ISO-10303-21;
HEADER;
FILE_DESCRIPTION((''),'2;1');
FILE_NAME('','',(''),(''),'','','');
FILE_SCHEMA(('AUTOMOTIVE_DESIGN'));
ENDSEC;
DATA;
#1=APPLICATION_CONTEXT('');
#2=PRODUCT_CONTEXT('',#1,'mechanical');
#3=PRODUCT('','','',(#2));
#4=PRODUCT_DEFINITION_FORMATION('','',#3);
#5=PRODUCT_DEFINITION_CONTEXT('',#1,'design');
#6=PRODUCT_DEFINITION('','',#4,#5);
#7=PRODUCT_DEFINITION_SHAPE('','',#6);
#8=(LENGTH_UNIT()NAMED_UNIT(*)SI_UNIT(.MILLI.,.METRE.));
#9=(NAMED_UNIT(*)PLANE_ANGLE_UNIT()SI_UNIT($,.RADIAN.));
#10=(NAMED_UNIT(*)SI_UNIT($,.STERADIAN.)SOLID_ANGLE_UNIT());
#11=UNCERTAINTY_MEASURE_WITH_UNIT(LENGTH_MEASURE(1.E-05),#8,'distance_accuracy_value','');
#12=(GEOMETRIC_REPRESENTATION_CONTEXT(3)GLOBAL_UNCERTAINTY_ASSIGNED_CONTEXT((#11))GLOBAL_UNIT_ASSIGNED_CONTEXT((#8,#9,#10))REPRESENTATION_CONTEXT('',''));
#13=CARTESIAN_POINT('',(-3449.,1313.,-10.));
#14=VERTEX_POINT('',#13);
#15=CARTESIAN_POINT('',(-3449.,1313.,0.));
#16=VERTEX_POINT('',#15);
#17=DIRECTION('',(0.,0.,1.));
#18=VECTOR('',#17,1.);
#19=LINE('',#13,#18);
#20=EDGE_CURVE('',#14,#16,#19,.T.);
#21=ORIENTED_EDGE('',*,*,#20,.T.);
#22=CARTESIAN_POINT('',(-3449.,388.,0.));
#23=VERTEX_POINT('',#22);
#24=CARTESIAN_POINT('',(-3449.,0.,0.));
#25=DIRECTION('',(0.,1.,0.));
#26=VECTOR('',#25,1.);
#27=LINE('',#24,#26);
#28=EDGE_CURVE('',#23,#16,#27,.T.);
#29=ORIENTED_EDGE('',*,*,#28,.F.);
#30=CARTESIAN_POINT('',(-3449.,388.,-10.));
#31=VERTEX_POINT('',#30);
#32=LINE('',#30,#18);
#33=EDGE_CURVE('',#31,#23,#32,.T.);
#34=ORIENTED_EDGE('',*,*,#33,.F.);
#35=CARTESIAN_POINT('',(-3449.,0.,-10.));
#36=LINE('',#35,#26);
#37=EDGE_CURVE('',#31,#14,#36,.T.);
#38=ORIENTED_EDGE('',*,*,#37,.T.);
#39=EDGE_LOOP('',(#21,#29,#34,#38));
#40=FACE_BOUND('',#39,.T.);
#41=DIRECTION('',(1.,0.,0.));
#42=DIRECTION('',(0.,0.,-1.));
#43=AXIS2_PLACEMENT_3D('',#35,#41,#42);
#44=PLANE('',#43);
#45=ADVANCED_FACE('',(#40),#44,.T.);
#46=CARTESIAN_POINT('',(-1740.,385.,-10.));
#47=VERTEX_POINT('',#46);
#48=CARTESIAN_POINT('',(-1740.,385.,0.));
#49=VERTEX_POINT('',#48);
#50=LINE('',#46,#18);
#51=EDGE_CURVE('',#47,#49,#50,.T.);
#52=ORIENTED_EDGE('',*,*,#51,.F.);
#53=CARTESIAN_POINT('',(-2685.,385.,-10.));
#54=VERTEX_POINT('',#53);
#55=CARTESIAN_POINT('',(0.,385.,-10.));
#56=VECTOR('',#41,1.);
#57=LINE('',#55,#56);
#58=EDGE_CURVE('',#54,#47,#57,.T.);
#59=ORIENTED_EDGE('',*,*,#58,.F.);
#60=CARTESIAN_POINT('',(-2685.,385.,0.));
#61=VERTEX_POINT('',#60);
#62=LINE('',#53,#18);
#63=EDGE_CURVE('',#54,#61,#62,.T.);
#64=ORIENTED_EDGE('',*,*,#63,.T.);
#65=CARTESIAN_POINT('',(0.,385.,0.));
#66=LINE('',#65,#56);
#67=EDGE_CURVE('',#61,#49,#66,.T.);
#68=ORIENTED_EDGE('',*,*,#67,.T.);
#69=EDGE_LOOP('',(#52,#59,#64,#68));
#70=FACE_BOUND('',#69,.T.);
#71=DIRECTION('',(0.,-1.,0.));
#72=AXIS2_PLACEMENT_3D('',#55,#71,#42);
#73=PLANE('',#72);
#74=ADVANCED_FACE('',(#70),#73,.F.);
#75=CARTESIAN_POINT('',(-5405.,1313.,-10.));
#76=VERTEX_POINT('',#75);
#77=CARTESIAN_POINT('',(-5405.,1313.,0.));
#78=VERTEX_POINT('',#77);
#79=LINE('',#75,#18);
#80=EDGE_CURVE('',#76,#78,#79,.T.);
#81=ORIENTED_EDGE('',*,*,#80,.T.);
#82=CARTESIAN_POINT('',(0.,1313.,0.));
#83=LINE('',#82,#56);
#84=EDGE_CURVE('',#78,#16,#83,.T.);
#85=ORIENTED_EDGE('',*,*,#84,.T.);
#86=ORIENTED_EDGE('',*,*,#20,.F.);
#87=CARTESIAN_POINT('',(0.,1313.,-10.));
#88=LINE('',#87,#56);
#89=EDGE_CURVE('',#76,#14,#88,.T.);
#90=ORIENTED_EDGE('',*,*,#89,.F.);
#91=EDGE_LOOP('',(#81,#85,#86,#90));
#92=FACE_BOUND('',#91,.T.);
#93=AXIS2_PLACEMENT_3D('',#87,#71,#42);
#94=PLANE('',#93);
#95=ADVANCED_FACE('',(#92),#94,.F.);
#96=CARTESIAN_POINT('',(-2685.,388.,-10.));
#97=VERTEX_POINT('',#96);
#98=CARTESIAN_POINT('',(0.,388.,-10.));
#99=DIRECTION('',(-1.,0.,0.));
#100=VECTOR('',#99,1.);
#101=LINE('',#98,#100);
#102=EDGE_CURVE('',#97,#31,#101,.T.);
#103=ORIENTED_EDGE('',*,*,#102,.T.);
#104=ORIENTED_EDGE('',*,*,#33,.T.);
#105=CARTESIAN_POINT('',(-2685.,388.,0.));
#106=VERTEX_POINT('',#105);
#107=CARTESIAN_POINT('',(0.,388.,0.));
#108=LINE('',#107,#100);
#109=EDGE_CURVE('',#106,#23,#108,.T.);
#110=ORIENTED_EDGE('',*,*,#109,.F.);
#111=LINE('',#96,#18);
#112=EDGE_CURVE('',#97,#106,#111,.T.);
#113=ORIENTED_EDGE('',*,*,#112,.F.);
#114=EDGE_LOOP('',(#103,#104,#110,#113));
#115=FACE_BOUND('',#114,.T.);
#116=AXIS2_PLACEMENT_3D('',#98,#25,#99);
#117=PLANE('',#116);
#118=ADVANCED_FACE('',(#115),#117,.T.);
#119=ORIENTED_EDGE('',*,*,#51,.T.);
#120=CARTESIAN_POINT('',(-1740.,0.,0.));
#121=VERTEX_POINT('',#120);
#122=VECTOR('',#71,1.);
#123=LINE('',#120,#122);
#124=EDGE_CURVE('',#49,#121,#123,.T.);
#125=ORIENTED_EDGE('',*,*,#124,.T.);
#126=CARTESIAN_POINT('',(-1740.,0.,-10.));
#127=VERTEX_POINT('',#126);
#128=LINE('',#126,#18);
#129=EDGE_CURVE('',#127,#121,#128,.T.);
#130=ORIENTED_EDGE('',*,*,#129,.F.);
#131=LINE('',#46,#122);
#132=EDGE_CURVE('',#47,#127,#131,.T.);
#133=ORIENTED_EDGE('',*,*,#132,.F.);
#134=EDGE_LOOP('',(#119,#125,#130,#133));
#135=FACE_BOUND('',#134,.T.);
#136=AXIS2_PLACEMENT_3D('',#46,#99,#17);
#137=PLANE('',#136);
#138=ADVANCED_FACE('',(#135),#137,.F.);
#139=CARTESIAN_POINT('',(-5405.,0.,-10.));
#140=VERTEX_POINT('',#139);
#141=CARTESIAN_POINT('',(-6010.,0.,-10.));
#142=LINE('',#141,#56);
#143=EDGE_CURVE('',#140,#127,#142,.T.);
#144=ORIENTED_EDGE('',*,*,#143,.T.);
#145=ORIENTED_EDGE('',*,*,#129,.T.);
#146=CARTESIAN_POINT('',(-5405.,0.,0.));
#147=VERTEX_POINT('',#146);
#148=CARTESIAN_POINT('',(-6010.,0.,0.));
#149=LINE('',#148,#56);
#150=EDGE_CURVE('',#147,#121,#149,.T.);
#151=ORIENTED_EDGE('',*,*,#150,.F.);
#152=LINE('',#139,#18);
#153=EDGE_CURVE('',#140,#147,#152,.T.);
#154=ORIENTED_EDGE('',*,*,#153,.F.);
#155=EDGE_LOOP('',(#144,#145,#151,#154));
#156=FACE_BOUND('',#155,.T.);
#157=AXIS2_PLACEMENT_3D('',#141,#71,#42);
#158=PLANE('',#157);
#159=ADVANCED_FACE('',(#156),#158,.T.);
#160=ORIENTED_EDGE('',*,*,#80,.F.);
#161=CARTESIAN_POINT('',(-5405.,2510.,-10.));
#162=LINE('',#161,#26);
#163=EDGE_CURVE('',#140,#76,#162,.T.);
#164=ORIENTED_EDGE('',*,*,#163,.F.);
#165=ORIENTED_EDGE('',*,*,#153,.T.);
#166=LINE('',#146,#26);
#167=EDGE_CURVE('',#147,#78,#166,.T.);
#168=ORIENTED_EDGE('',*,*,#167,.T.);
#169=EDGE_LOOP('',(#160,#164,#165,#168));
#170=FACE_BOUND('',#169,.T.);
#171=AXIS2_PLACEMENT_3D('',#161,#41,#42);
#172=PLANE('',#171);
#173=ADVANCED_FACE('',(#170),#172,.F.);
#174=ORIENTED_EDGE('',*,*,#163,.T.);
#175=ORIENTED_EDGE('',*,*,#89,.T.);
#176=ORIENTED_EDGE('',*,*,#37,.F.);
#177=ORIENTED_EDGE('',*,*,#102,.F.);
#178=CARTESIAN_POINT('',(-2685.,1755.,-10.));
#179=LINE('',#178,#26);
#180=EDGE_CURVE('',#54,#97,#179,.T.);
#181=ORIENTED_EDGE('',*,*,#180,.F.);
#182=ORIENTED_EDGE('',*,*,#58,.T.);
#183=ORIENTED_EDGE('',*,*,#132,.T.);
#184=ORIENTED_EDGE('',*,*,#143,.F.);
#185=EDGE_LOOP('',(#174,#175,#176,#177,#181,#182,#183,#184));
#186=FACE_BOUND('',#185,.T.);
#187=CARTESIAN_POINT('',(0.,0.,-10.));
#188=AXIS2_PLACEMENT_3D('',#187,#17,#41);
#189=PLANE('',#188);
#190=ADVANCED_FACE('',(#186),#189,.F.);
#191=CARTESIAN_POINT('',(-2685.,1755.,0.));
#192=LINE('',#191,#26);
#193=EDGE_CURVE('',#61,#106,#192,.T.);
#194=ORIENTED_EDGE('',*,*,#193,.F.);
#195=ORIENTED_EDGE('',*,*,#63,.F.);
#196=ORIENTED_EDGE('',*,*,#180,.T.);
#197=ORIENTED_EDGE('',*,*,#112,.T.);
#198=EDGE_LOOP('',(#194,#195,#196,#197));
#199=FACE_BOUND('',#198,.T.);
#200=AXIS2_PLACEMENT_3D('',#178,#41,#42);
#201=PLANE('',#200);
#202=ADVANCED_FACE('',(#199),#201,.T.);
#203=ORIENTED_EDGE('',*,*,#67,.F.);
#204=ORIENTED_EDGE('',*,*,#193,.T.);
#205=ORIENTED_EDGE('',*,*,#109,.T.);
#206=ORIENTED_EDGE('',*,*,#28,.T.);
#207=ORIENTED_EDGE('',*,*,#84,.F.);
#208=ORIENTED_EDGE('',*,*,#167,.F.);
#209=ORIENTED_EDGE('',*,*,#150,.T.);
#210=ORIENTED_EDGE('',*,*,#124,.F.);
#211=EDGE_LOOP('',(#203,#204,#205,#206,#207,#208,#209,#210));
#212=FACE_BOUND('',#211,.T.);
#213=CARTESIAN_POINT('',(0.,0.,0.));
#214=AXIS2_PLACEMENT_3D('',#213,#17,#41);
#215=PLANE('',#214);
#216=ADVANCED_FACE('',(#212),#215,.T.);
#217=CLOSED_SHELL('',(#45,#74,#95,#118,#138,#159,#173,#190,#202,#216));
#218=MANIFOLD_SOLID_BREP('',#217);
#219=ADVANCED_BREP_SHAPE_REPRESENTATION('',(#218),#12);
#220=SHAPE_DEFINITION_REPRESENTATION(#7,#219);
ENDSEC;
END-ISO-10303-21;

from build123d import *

# Parameters (mm, degrees)
TABAN_FLAN_1_DEPTH         = 10
KES_EKSTR_ZYON1_DEPTH      = 6514.086825769
KES_EKSTR_ZYON1_DEPTH_BACK = 6514.086825769
IZIM2_W                    = 605
IZIM2_H                    = 2510
KES_EKSTR_ZYON2_DEPTH      = 5960.381259829
KES_EKSTR_ZYON2_DEPTH_BACK = 5960.381259829
IZIM3_W                    = 1345
IZIM3_H                    = 1305
KES_EKSTR_ZYON3_DEPTH      = 5960.381259829
KES_EKSTR_ZYON3_DEPTH_BACK = 5960.381259829
IZIM4_W                    = 3
IZIM4_H                    = 385
KES_EKSTR_ZYON4_DEPTH      = 5960.381259829
KES_EKSTR_ZYON4_DEPTH_BACK = 5960.381259829
IZIM6_W                    = 1737
IZIM6_H                    = 385
IZIM6_W_2                  = 2720
IZIM6_H_2                  = 857
KES_EKSTR_ZYON5_DEPTH      = 5653.126502477
KES_EKSTR_ZYON5_DEPTH_BACK = 5653.126502477
IZIM7_W                    = 764
IZIM7_H                    = 925


# Sheet-metal steps are written as plain solids
with BuildPart() as part:
    # Çizim1 → Taban-Flanş1 (new body)
    with BuildSketch(Plane.XY):
        Polygon((0, 0), (0, 1755), (-2685, 1755), (-2685, 2510), (-6010, 2510), (-6010, 0), align=None)
    extrude(amount=-TABAN_FLAN_1_DEPTH)

    # Çizim2 → Kes-Ekstrüzyon1 (cut, two sides: drawn at the far end of the back side and taken through both)
    with BuildSketch(Plane.XY.offset(-KES_EKSTR_ZYON1_DEPTH_BACK)):
        with Locations((-5707.5, 1255)):
            Rectangle(IZIM2_W, IZIM2_H)
    extrude(amount=KES_EKSTR_ZYON1_DEPTH + KES_EKSTR_ZYON1_DEPTH_BACK, mode=Mode.SUBTRACT)

    # Çizim3 → Kes-Ekstrüzyon2 (cut, two sides: drawn at the far end of the back side and taken through both)
    with BuildSketch(Plane.XY.offset(-KES_EKSTR_ZYON2_DEPTH_BACK)):
        with Locations((-672.5, 1102.5)):
            Rectangle(IZIM3_W, IZIM3_H)
    extrude(amount=KES_EKSTR_ZYON2_DEPTH + KES_EKSTR_ZYON2_DEPTH_BACK, mode=Mode.SUBTRACT)

    # Çizim4 → Kes-Ekstrüzyon3 (cut, two sides: drawn at the far end of the back side and taken through both)
    with BuildSketch(Plane.XY.offset(-KES_EKSTR_ZYON3_DEPTH_BACK)):
        Polygon((-1345, 1755), (-2685, 1755), (-2685, 385), (-1345, 385), (-1345, 450), align=None)
        with Locations((-1.5, 192.5)):
            Rectangle(IZIM4_W, IZIM4_H)
        Polygon((0, 450), (-1345, 450), (-1345, 385), (-3, 385), (0, 385), align=None)
    extrude(amount=KES_EKSTR_ZYON3_DEPTH + KES_EKSTR_ZYON3_DEPTH_BACK, mode=Mode.SUBTRACT)

    # Çizim6 → Kes-Ekstrüzyon4 (cut, two sides: drawn at the far end of the back side and taken through both)
    with BuildSketch(Plane.XY.offset(-KES_EKSTR_ZYON4_DEPTH_BACK)):
        with Locations((-871.5, 192.5)):
            Rectangle(IZIM6_W, IZIM6_H)
        with Locations((-4045, 2081.5)):
            Rectangle(IZIM6_W_2, IZIM6_H_2)
    extrude(amount=KES_EKSTR_ZYON4_DEPTH + KES_EKSTR_ZYON4_DEPTH_BACK, mode=Mode.SUBTRACT)

    # Çizim7 → Kes-Ekstrüzyon5 (cut, two sides: drawn at the far end of the back side and taken through both)
    with BuildSketch(Plane.XY.offset(-KES_EKSTR_ZYON5_DEPTH_BACK)):
        with Locations((-3067, 850.5)):
            Rectangle(IZIM7_W, IZIM7_H)
        Polygon((-2685, 1653), (-5405, 1653), (-5405, 1313), (-3449, 1313), (-2685, 1313), align=None)
    extrude(amount=KES_EKSTR_ZYON5_DEPTH + KES_EKSTR_ZYON5_DEPTH_BACK, mode=Mode.SUBTRACT)


solid = part.part
